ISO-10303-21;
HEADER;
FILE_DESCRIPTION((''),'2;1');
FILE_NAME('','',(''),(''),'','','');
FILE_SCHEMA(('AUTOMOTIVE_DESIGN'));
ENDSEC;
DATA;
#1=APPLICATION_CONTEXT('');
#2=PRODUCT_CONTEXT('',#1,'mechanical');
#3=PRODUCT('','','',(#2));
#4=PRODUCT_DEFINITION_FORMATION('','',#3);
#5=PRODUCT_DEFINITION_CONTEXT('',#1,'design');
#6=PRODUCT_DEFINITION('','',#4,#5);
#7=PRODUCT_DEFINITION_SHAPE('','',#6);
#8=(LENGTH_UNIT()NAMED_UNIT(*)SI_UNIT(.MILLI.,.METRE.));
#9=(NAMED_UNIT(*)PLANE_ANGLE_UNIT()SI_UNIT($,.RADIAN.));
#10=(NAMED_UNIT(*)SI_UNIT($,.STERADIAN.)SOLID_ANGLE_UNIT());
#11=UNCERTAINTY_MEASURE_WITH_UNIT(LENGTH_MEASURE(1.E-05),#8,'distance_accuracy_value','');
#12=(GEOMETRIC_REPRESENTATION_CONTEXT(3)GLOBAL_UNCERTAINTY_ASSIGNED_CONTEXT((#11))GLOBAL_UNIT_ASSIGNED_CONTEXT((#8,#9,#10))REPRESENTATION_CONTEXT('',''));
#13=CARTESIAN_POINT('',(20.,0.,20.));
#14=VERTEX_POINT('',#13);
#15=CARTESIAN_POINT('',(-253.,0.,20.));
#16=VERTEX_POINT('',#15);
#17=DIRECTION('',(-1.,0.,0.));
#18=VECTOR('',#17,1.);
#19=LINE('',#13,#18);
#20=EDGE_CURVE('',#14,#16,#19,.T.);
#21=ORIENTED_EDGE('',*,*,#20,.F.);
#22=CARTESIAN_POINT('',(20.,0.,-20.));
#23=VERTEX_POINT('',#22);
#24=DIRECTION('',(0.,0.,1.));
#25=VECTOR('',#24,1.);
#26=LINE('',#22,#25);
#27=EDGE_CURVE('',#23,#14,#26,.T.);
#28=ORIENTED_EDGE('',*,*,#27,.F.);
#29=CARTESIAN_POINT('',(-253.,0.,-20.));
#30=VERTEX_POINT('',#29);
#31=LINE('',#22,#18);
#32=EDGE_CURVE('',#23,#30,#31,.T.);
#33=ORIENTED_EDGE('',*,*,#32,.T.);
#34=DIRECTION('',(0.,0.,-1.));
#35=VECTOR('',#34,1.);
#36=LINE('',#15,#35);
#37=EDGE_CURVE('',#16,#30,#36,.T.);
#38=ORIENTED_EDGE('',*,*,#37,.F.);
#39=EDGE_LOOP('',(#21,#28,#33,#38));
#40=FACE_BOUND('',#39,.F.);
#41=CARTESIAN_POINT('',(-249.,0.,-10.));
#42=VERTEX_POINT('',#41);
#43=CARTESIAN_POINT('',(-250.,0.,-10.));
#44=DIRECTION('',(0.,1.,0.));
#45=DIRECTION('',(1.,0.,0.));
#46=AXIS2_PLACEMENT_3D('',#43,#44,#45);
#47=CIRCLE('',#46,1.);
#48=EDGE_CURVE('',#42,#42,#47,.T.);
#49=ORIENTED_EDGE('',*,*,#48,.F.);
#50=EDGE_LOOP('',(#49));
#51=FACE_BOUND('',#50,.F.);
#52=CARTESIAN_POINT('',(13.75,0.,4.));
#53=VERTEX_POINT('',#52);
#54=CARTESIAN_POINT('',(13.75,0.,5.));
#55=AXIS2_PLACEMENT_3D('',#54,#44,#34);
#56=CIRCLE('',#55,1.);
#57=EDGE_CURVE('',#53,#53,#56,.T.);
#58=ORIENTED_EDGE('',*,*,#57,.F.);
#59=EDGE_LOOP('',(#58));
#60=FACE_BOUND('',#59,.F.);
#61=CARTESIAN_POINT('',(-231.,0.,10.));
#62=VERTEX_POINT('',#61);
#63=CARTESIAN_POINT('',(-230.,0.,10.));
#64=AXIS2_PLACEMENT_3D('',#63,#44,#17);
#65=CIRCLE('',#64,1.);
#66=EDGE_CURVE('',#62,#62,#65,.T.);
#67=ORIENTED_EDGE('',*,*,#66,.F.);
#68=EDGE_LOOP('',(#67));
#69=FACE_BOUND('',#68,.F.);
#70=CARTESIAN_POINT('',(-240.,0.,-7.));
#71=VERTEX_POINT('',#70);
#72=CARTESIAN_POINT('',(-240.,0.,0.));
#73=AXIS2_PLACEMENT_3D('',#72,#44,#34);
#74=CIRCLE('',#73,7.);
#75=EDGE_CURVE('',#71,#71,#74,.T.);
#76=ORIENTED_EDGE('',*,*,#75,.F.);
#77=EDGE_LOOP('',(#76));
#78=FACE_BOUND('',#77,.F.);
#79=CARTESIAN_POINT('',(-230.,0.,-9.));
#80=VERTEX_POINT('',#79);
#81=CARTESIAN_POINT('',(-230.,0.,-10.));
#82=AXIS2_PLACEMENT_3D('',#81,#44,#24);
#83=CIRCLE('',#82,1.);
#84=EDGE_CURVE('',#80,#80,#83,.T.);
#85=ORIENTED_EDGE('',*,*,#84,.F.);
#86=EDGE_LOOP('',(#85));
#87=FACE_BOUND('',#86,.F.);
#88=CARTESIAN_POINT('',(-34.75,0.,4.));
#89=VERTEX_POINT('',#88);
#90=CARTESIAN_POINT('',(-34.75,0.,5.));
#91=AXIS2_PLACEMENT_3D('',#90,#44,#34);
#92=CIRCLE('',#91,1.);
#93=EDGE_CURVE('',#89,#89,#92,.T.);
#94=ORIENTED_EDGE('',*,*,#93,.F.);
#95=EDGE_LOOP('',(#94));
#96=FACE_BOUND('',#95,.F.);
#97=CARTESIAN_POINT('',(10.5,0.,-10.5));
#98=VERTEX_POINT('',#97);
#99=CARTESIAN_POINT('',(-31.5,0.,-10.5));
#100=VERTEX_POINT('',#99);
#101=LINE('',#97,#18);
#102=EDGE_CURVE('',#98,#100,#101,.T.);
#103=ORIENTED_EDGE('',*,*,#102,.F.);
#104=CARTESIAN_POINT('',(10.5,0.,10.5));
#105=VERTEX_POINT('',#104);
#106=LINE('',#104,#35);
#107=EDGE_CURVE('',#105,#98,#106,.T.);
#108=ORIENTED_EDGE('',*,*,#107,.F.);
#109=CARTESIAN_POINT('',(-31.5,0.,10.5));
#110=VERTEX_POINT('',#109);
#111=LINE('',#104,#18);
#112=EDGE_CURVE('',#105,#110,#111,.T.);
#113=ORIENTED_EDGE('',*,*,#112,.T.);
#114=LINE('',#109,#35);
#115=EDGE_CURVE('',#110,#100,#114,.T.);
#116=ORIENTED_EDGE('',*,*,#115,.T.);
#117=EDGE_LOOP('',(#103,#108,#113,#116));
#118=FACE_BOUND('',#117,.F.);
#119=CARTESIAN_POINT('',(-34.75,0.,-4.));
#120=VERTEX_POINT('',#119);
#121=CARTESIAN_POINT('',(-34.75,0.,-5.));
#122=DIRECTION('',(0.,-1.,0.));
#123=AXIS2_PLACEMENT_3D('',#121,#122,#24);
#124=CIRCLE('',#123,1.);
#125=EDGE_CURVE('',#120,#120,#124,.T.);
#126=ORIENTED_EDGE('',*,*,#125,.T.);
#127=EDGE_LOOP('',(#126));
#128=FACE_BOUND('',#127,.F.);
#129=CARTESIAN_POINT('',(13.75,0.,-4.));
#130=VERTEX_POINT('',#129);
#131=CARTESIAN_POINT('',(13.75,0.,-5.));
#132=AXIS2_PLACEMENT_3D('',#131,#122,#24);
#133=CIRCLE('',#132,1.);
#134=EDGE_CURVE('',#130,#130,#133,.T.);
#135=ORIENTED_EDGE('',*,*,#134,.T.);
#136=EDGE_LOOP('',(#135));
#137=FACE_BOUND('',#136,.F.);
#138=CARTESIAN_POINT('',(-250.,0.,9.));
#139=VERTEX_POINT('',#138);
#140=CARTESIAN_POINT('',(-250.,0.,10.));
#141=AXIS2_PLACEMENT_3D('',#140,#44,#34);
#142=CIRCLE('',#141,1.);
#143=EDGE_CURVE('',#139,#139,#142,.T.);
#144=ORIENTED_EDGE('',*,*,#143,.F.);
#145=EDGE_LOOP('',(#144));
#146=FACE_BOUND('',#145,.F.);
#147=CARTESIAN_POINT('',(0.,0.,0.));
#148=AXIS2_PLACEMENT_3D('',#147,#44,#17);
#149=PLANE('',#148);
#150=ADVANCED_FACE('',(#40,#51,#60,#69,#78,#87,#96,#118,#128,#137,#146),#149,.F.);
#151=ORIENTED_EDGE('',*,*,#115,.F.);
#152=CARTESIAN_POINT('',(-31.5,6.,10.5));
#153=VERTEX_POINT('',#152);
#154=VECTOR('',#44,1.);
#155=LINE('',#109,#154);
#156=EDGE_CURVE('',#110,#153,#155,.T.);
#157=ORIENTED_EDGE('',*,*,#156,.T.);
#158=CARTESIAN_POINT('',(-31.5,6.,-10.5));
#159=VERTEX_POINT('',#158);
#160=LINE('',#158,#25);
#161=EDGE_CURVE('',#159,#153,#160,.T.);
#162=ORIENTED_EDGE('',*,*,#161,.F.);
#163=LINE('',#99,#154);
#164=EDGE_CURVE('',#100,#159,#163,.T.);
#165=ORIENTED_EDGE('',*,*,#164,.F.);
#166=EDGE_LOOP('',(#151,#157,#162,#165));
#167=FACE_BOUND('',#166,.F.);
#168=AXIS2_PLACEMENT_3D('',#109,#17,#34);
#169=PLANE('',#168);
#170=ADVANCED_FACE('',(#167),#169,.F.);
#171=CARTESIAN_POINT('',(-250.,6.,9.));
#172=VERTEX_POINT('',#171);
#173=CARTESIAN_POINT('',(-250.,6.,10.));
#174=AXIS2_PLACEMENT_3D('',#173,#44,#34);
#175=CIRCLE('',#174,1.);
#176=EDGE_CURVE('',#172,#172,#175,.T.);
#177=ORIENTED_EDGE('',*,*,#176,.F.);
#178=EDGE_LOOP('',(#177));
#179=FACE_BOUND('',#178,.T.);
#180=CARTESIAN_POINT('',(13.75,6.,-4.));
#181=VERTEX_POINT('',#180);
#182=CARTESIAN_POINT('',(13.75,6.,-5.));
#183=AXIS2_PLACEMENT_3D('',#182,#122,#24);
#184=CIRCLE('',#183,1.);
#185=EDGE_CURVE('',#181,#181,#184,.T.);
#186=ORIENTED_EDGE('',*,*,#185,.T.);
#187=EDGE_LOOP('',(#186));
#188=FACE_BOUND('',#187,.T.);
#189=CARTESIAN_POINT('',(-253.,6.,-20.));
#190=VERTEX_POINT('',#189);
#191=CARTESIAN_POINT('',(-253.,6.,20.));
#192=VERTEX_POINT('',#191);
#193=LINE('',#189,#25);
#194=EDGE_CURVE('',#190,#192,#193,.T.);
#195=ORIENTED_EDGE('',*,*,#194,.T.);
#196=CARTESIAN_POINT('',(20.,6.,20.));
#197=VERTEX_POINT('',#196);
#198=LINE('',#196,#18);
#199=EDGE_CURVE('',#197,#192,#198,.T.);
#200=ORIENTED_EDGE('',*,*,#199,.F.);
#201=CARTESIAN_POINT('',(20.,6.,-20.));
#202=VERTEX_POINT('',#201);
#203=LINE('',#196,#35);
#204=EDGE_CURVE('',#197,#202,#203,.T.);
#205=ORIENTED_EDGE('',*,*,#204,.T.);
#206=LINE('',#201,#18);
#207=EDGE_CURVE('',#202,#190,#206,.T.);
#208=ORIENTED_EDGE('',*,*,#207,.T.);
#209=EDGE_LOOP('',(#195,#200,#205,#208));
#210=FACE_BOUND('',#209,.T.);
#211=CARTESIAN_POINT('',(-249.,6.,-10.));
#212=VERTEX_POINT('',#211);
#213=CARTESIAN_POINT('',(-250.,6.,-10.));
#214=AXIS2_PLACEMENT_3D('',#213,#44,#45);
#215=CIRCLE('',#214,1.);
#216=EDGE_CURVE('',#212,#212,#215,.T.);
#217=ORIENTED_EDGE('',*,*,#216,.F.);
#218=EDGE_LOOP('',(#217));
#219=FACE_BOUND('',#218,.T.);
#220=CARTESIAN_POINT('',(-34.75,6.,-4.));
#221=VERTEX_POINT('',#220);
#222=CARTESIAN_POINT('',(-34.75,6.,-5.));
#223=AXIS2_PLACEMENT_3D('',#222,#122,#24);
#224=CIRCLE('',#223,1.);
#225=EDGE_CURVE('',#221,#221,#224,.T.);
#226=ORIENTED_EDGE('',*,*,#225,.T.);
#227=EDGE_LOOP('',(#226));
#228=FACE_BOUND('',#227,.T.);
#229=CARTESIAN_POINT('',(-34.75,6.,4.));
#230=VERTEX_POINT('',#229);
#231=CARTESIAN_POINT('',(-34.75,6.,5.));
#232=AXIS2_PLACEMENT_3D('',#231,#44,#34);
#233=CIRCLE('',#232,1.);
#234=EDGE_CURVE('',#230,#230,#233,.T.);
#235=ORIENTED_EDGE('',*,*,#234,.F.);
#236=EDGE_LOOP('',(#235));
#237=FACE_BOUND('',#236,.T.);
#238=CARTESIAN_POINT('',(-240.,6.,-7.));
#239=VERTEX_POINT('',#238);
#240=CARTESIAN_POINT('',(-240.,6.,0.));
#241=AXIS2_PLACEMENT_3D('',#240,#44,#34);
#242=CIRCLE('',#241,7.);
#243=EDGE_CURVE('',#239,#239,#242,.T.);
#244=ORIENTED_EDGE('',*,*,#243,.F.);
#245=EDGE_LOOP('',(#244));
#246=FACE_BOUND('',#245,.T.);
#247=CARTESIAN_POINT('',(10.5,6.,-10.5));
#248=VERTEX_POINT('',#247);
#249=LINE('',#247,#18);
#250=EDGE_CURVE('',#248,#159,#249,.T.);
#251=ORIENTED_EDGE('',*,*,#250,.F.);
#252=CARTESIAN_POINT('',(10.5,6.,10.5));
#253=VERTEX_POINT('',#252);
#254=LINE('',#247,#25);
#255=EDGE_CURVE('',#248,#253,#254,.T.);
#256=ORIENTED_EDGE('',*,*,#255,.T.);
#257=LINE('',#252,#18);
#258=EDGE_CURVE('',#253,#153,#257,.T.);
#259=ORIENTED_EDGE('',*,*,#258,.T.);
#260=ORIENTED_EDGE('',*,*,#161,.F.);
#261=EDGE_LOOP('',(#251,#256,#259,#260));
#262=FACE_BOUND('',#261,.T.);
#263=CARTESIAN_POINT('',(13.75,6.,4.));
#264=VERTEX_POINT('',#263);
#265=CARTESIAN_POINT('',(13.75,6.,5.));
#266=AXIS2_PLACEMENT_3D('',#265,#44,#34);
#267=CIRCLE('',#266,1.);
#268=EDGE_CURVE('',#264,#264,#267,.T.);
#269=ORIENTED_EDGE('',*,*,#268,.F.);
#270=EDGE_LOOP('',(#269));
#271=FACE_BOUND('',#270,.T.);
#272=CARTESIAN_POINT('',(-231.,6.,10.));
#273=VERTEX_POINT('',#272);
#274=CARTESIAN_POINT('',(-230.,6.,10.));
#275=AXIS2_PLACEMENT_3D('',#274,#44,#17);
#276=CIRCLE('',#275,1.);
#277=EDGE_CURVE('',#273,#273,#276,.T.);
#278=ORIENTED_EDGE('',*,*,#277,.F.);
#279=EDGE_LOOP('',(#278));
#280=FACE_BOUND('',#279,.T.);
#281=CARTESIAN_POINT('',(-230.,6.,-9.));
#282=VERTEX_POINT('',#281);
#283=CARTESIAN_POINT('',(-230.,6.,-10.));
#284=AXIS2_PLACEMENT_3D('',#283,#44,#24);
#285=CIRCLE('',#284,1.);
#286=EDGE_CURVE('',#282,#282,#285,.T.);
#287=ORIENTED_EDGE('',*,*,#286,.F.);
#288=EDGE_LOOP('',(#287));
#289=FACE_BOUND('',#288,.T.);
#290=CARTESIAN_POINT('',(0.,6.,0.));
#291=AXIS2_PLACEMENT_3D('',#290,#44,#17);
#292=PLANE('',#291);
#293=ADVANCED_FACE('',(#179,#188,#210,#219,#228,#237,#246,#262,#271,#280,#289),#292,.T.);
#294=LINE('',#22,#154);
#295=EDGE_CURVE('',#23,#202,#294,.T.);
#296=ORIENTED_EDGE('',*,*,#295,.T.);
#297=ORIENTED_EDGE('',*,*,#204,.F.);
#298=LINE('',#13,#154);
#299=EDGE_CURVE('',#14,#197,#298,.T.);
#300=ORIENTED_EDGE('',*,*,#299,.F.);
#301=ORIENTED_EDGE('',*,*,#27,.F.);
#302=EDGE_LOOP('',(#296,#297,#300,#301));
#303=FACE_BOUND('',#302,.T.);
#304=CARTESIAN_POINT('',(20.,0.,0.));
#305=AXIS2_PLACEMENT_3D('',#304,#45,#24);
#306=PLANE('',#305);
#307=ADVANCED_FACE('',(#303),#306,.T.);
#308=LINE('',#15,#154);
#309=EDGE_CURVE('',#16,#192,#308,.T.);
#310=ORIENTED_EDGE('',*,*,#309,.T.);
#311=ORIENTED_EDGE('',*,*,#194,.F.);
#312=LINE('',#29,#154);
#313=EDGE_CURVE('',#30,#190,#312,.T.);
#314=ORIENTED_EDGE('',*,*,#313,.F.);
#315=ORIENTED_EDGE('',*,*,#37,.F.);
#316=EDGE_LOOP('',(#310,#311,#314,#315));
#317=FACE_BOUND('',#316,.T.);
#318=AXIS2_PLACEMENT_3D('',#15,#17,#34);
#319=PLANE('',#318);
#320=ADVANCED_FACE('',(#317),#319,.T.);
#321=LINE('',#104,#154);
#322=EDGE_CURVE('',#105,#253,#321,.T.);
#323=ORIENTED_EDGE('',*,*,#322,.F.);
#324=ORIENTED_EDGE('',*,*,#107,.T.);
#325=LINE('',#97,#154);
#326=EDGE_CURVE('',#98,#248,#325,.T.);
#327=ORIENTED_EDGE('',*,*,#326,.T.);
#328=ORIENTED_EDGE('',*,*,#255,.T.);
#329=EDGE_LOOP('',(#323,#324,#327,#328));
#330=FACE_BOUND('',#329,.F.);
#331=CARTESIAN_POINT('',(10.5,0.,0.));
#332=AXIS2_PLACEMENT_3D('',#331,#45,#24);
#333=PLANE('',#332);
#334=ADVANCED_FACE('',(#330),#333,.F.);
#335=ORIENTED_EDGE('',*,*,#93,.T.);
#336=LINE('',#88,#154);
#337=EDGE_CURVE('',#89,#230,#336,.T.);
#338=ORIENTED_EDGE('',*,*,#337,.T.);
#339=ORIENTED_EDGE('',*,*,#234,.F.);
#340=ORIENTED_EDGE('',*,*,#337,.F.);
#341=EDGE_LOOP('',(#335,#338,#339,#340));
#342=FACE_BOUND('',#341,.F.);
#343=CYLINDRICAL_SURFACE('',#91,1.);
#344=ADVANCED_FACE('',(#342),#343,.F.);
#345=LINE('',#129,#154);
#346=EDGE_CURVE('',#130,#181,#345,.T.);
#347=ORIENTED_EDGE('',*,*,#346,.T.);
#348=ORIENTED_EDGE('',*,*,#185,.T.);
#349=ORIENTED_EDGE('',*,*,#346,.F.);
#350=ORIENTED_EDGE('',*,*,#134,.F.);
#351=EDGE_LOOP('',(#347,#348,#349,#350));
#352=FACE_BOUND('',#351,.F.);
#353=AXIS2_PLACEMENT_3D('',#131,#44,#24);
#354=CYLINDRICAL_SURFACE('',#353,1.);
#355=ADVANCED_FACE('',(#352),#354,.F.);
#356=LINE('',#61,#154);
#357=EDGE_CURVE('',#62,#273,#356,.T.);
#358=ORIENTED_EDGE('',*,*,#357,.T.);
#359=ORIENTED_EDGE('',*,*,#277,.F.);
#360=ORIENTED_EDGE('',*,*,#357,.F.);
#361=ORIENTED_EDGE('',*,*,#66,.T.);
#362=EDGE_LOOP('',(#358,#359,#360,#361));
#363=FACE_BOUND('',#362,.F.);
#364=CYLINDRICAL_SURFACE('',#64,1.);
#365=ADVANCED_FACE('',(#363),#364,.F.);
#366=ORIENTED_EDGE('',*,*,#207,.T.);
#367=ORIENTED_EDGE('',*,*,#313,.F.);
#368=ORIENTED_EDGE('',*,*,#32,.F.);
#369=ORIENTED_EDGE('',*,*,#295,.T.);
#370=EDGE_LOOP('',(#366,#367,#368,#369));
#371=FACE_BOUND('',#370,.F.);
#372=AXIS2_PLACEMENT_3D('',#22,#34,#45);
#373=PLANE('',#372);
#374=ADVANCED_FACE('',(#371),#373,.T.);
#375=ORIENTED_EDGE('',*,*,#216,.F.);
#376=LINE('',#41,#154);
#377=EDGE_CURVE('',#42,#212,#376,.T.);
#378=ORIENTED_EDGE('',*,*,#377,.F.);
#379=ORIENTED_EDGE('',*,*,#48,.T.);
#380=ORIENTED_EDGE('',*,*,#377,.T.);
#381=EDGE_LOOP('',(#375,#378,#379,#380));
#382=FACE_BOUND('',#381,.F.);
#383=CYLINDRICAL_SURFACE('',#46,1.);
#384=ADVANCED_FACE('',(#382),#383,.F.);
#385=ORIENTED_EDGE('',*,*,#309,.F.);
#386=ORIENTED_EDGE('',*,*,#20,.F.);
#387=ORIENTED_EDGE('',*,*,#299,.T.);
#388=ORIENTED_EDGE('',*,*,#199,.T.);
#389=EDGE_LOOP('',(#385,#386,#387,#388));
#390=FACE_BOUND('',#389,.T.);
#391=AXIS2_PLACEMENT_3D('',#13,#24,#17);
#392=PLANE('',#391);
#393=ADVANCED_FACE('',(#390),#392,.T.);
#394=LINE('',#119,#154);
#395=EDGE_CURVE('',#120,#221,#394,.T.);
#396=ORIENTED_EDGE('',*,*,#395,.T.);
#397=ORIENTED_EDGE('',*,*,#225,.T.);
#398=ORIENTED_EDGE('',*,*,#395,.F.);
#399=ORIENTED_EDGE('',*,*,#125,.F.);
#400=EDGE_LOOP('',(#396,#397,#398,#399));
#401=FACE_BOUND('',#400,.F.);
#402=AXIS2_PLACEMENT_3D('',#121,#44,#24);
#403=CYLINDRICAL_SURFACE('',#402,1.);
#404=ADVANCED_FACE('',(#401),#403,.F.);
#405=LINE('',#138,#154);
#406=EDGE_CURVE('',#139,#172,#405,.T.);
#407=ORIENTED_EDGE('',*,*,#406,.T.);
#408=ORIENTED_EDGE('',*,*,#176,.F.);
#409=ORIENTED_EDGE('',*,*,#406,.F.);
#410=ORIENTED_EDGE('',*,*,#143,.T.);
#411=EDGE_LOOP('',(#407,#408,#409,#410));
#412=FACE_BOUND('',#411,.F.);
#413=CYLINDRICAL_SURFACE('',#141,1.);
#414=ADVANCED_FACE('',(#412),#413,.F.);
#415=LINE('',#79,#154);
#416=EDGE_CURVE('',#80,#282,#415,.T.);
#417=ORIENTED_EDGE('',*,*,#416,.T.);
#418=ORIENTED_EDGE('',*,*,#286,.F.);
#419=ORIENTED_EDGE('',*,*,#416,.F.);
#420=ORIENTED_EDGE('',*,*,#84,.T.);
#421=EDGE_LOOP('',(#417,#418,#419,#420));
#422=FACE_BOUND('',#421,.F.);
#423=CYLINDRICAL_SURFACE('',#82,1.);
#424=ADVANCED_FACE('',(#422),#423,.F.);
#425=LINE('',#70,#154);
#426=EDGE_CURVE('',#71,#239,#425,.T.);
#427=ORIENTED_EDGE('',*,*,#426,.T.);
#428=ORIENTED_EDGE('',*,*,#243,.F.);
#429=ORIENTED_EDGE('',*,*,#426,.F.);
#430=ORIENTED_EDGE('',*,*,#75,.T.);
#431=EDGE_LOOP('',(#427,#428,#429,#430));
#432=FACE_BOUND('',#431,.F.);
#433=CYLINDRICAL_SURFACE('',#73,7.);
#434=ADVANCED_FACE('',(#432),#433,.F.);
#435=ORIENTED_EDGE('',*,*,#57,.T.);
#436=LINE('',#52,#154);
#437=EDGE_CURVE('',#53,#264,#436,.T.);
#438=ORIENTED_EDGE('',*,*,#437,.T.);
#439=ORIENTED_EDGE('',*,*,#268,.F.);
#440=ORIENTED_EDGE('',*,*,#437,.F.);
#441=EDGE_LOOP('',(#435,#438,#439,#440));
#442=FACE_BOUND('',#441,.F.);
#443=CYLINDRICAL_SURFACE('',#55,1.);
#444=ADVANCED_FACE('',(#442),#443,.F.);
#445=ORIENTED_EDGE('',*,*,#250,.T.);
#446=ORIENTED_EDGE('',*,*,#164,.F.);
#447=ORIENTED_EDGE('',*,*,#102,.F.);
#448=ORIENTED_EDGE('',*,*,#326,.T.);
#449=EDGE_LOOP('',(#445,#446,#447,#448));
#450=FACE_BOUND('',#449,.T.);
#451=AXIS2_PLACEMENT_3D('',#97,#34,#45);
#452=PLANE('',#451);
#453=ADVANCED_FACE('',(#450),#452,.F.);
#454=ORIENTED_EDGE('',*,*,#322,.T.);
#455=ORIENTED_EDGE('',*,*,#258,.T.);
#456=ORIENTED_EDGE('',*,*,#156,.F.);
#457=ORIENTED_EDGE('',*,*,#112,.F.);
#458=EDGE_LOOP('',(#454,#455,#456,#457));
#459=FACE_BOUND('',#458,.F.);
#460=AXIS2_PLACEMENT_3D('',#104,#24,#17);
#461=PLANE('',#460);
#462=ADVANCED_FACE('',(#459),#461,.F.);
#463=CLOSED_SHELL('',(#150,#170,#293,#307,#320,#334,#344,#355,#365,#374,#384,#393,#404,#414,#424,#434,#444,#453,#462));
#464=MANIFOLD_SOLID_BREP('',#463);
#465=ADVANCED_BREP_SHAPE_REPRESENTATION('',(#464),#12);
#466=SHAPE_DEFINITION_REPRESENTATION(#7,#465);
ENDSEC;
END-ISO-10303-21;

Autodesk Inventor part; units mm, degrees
ref_plane "YZ Plane" through (0, 0, 0) normal (1, 0, 0) x (0, 1, 0)
ref_plane "XZ Plane" through (0, 0, 0) normal (0, 1, 0) x (-1, 0, 0)
ref_plane "XY Plane" through (0, 0, 0) normal (0, 0, 1) x (1, 0, 0)
sketch "Sketch1" plane through (0, 0, 0) normal (0, 1, 0) x (-1, 0, 0)
  line L0 (0, 0) -> (31.5, 0)
  line L1 (0, 0) -> (18.5, 0) construction
  line L2 (0, 0) -> (-10.5, 0)
  line L3 (-20, 0) -> (-20, 20)
  line L4 (-20, 20) -> (253, 20)
  line L5 (253, 20) -> (253, 0)
  line L6 (-10.5, 10.5) -> (31.5, 10.5)
  line L7 (31.5, 10.5) -> (31.5, -10.5)
  line L8 (31.5, -10.5) -> (-10.5, -10.5)
  line L9 (-10.5, -10.5) -> (-10.5, 10.5)
  line L10 (-10.5, 10.5) -> (31.5, -10.5) construction
  line L11 (31.5, 10.5) -> (-10.5, -10.5) construction
  line L12 (-13.75, 5) -> (34.75, 5) construction
  line L13 (34.75, 5) -> (34.75, -5) construction
  line L14 (34.75, -5) -> (-13.75, -5) construction
  line L15 (-13.75, -5) -> (-13.75, 5) construction
  line L16 (-13.75, 5) -> (34.75, -5) construction
  line L17 (34.75, 5) -> (-13.75, -5) construction
  line L18 (31.5, 0) -> (253, 0)
  line L19 (-10.5, 0) -> (-20, 0)
  line L20 (-20, 0) -> (0, 0) construction
  line L21 (240, 0) -> (240, 10) construction
  line L22 (240, 10) -> (250, 10) construction
  point P0 (10.5, 0)
  point P1 (10.5, 0)
  dimension "d28" = 18.5
  dimension "d37" = 20
  dimension "d38" = 20
  dimension "d39" = 42
  dimension "d40" = 21
  dimension "d41" = 48.5
  dimension "d42" = 10
  dimension "d43" = 10.5
  dimension "d52" = 240
  dimension "d53" = 13
  dimension "d54" = 9.5
  dimension "d62" = 10
extrude "Extrusion1" add sketch "Sketch1" along normal blind 6 contours L7 L6 L9 L19 L3 L4 L5 L18
hole "Hole3" at (0, 0, 0) at (13.75, 0, 5) at (-34.75, 0, 5) direction (0, 1, 0) diameter 2 end through all
fillet "Fillet1" [suppressed]
mirror "Mirror1" about plane through (-31.5, 0, 0) normal (0, 0, -1)
hole "Hole4" at (-240, 0, 0) direction (0, 1, 0) diameter 14 end through all
hole "Hole5" at (-250, 0, 10) direction (0, 1, 0) diameter 2 end through all
pattern_circular "Circular Pattern1" count 4 over 360 about axis through (-240, 275.9801, 0) along (0, 1, 0) of "Hole5"
properties part number "segment2b" material "Plywood, Finish"
